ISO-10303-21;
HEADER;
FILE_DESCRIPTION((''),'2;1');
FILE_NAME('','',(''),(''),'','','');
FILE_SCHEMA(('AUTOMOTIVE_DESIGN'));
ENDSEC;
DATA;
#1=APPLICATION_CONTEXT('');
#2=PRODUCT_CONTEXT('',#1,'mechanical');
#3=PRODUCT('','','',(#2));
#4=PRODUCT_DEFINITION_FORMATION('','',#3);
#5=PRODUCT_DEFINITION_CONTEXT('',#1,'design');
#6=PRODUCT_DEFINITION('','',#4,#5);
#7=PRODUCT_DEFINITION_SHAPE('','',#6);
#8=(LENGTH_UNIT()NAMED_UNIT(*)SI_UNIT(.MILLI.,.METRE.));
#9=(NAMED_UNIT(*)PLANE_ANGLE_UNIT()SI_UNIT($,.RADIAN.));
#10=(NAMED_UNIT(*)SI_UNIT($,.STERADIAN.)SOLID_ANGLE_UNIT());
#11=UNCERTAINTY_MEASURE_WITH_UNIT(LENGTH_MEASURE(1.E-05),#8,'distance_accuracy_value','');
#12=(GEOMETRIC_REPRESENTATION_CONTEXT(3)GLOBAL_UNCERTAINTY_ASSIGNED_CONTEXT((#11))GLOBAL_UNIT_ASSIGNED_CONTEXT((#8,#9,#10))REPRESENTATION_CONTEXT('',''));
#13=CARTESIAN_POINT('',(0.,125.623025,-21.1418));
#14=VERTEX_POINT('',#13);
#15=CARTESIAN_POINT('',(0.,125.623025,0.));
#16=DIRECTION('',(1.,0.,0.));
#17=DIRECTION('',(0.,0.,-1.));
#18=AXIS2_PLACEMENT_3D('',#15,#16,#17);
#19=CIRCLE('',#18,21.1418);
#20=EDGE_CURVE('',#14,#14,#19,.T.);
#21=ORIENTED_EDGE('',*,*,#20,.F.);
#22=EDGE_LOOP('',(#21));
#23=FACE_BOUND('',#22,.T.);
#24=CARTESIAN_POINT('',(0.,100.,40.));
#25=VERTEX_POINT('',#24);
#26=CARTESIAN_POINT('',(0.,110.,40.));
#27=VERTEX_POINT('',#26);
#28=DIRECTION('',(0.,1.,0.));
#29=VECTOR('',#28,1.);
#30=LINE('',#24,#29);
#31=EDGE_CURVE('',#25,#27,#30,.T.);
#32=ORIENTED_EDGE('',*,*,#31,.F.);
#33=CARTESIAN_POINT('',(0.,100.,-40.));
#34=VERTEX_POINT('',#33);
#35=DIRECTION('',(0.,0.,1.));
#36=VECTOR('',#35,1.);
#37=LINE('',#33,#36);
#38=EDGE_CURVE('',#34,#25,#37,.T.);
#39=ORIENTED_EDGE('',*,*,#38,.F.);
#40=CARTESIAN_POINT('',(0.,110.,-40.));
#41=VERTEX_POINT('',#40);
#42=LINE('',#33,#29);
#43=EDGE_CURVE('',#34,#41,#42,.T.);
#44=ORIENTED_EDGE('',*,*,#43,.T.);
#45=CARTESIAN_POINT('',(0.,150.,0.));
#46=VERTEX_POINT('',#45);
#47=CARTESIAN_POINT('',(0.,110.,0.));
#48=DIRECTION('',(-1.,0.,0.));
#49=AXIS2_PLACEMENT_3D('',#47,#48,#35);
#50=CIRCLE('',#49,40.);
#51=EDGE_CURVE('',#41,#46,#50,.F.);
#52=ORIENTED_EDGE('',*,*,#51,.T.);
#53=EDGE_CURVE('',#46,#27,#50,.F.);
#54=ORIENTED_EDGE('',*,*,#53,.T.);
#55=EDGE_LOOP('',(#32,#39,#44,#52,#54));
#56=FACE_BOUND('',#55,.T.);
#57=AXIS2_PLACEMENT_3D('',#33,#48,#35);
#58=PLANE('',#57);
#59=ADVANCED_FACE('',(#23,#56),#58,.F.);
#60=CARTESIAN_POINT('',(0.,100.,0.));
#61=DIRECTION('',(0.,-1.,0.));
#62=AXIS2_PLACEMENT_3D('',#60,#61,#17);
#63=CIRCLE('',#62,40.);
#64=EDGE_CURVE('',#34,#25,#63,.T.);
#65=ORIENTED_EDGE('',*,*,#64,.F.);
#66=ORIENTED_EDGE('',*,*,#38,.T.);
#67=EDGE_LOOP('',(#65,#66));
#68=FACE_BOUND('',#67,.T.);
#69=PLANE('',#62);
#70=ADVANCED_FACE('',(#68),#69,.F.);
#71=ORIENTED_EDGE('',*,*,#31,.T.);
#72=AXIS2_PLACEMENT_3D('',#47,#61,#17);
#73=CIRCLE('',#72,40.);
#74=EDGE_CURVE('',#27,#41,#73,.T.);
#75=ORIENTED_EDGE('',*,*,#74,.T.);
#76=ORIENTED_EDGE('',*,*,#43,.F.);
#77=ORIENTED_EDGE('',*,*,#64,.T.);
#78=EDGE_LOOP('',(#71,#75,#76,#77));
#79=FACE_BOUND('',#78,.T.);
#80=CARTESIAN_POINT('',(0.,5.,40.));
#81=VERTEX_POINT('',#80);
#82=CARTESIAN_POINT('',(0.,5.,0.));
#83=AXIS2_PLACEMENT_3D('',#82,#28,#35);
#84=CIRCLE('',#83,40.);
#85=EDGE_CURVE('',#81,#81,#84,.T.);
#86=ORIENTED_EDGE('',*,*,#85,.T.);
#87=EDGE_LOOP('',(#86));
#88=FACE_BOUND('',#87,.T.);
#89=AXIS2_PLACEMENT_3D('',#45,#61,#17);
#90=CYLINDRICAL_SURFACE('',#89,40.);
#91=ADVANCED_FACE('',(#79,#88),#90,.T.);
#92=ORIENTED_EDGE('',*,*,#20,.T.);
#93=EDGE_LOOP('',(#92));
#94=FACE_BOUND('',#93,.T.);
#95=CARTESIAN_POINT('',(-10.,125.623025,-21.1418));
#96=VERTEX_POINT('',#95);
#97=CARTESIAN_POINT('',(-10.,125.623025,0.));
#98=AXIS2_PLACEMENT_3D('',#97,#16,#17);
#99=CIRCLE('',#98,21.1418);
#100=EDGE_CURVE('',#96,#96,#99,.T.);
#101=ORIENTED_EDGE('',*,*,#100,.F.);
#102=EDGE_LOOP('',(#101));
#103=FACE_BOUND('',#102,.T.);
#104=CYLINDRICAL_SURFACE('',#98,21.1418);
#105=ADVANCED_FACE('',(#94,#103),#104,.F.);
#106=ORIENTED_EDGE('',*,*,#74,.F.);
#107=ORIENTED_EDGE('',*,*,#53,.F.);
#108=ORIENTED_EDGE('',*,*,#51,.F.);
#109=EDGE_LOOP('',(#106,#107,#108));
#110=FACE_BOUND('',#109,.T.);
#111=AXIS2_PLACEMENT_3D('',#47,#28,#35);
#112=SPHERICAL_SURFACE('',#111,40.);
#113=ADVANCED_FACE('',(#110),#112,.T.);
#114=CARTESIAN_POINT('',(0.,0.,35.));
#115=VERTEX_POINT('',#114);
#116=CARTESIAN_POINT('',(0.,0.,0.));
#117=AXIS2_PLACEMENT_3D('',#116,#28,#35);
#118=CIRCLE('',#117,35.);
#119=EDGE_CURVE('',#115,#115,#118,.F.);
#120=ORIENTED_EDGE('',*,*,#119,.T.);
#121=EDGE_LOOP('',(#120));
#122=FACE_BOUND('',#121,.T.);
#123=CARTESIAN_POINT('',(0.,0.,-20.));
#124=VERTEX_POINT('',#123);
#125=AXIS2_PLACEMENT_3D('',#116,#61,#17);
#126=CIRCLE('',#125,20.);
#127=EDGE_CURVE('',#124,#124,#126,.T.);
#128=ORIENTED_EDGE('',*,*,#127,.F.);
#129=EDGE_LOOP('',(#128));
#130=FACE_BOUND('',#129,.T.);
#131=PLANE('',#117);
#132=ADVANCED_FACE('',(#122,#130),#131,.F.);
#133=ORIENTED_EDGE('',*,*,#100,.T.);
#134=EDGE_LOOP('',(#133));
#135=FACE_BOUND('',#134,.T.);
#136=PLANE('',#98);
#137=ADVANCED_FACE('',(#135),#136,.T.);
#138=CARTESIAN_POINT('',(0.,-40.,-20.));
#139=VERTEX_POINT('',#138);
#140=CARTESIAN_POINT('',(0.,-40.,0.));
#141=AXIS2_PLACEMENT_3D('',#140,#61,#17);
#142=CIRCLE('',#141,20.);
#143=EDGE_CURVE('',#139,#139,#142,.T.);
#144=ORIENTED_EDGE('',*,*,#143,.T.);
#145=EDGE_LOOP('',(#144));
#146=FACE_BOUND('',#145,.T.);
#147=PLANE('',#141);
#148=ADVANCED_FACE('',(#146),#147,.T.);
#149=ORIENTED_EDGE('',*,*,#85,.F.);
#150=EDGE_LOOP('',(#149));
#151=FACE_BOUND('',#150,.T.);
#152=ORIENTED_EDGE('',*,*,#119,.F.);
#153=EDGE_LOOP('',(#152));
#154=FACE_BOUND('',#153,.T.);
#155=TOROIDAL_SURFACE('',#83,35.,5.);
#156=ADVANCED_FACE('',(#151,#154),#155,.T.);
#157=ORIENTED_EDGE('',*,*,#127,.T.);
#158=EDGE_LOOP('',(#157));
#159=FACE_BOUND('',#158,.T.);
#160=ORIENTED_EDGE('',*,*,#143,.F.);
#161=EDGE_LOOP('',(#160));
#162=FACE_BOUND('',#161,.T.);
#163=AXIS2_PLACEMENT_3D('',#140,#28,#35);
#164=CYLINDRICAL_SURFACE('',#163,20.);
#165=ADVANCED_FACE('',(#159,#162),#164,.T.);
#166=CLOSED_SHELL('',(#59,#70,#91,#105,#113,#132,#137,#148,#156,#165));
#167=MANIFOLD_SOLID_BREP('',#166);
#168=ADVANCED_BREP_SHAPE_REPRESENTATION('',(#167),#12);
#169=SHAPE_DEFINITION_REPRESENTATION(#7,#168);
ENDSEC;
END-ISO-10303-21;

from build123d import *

# Parameters (mm, degrees)
SKETCH1_R           = 40
BOSS_EXTRUDE1_DEPTH = 150
SKETCH2_R           = 20
BOSS_EXTRUDE2_DEPTH = 40
SKETCH3_W           = 40.516071082
SKETCH3_H           = 80
CUT_EXTRUDE1_DEPTH  = 50
SKETCH4_R           = 21.141799796
CUT_EXTRUDE2_DEPTH  = 10
FILLET1_R           = 40
FILLET2_R           = 5


with BuildPart() as part:
    # Sketch1 → Boss-Extrude1 (new body)
    with BuildSketch(Plane(origin=(0, 0, 0), x_dir=(1, 0, 0), z_dir=(0, 1, 0))):
        with Locations(Location((0, 0, 0), (0, 0, 270))):
            Circle(SKETCH1_R)
    extrude(amount=BOSS_EXTRUDE1_DEPTH)

    # Sketch2 → Boss-Extrude2 (add)
    with BuildSketch(Plane.XZ):
        with Locations(Location((0, 0, 0), (0, 0, 270))):
            Circle(SKETCH2_R)
    extrude(amount=BOSS_EXTRUDE2_DEPTH)

    # Sketch3 → Cut-Extrude1 (cut)
    with BuildSketch(Plane(origin=(0, 150, 0), x_dir=(1, 0, 0), z_dir=(0, 1, 0))):
        with Locations((20.258035541, 0)):
            Rectangle(SKETCH3_W, SKETCH3_H)
    extrude(amount=-CUT_EXTRUDE1_DEPTH, mode=Mode.SUBTRACT)

    # Sketch4 → Cut-Extrude2 (cut)
    with BuildSketch(Plane(origin=(0, 0, 0), x_dir=(0, 0, -1), z_dir=(1, 0, 0))):
        with Locations((0, 125.6230245)):
            Circle(SKETCH4_R)
    extrude(amount=-CUT_EXTRUDE2_DEPTH, mode=Mode.SUBTRACT)

    # Fillet1
    fillet1_edges = [part.edges().sort_by_distance(p)[0] for p in [
        (-40, 150, 0),
    ]]
    fillet(fillet1_edges, radius=FILLET1_R - 0.0001)  # a hair under: the kernel refuses the full size

    # Fillet2
    fillet2_edges = [part.edges().sort_by_distance(p)[0] for p in [
        (0, 0, -40),
    ]]
    fillet(fillet2_edges, radius=FILLET2_R)


solid = part.part
